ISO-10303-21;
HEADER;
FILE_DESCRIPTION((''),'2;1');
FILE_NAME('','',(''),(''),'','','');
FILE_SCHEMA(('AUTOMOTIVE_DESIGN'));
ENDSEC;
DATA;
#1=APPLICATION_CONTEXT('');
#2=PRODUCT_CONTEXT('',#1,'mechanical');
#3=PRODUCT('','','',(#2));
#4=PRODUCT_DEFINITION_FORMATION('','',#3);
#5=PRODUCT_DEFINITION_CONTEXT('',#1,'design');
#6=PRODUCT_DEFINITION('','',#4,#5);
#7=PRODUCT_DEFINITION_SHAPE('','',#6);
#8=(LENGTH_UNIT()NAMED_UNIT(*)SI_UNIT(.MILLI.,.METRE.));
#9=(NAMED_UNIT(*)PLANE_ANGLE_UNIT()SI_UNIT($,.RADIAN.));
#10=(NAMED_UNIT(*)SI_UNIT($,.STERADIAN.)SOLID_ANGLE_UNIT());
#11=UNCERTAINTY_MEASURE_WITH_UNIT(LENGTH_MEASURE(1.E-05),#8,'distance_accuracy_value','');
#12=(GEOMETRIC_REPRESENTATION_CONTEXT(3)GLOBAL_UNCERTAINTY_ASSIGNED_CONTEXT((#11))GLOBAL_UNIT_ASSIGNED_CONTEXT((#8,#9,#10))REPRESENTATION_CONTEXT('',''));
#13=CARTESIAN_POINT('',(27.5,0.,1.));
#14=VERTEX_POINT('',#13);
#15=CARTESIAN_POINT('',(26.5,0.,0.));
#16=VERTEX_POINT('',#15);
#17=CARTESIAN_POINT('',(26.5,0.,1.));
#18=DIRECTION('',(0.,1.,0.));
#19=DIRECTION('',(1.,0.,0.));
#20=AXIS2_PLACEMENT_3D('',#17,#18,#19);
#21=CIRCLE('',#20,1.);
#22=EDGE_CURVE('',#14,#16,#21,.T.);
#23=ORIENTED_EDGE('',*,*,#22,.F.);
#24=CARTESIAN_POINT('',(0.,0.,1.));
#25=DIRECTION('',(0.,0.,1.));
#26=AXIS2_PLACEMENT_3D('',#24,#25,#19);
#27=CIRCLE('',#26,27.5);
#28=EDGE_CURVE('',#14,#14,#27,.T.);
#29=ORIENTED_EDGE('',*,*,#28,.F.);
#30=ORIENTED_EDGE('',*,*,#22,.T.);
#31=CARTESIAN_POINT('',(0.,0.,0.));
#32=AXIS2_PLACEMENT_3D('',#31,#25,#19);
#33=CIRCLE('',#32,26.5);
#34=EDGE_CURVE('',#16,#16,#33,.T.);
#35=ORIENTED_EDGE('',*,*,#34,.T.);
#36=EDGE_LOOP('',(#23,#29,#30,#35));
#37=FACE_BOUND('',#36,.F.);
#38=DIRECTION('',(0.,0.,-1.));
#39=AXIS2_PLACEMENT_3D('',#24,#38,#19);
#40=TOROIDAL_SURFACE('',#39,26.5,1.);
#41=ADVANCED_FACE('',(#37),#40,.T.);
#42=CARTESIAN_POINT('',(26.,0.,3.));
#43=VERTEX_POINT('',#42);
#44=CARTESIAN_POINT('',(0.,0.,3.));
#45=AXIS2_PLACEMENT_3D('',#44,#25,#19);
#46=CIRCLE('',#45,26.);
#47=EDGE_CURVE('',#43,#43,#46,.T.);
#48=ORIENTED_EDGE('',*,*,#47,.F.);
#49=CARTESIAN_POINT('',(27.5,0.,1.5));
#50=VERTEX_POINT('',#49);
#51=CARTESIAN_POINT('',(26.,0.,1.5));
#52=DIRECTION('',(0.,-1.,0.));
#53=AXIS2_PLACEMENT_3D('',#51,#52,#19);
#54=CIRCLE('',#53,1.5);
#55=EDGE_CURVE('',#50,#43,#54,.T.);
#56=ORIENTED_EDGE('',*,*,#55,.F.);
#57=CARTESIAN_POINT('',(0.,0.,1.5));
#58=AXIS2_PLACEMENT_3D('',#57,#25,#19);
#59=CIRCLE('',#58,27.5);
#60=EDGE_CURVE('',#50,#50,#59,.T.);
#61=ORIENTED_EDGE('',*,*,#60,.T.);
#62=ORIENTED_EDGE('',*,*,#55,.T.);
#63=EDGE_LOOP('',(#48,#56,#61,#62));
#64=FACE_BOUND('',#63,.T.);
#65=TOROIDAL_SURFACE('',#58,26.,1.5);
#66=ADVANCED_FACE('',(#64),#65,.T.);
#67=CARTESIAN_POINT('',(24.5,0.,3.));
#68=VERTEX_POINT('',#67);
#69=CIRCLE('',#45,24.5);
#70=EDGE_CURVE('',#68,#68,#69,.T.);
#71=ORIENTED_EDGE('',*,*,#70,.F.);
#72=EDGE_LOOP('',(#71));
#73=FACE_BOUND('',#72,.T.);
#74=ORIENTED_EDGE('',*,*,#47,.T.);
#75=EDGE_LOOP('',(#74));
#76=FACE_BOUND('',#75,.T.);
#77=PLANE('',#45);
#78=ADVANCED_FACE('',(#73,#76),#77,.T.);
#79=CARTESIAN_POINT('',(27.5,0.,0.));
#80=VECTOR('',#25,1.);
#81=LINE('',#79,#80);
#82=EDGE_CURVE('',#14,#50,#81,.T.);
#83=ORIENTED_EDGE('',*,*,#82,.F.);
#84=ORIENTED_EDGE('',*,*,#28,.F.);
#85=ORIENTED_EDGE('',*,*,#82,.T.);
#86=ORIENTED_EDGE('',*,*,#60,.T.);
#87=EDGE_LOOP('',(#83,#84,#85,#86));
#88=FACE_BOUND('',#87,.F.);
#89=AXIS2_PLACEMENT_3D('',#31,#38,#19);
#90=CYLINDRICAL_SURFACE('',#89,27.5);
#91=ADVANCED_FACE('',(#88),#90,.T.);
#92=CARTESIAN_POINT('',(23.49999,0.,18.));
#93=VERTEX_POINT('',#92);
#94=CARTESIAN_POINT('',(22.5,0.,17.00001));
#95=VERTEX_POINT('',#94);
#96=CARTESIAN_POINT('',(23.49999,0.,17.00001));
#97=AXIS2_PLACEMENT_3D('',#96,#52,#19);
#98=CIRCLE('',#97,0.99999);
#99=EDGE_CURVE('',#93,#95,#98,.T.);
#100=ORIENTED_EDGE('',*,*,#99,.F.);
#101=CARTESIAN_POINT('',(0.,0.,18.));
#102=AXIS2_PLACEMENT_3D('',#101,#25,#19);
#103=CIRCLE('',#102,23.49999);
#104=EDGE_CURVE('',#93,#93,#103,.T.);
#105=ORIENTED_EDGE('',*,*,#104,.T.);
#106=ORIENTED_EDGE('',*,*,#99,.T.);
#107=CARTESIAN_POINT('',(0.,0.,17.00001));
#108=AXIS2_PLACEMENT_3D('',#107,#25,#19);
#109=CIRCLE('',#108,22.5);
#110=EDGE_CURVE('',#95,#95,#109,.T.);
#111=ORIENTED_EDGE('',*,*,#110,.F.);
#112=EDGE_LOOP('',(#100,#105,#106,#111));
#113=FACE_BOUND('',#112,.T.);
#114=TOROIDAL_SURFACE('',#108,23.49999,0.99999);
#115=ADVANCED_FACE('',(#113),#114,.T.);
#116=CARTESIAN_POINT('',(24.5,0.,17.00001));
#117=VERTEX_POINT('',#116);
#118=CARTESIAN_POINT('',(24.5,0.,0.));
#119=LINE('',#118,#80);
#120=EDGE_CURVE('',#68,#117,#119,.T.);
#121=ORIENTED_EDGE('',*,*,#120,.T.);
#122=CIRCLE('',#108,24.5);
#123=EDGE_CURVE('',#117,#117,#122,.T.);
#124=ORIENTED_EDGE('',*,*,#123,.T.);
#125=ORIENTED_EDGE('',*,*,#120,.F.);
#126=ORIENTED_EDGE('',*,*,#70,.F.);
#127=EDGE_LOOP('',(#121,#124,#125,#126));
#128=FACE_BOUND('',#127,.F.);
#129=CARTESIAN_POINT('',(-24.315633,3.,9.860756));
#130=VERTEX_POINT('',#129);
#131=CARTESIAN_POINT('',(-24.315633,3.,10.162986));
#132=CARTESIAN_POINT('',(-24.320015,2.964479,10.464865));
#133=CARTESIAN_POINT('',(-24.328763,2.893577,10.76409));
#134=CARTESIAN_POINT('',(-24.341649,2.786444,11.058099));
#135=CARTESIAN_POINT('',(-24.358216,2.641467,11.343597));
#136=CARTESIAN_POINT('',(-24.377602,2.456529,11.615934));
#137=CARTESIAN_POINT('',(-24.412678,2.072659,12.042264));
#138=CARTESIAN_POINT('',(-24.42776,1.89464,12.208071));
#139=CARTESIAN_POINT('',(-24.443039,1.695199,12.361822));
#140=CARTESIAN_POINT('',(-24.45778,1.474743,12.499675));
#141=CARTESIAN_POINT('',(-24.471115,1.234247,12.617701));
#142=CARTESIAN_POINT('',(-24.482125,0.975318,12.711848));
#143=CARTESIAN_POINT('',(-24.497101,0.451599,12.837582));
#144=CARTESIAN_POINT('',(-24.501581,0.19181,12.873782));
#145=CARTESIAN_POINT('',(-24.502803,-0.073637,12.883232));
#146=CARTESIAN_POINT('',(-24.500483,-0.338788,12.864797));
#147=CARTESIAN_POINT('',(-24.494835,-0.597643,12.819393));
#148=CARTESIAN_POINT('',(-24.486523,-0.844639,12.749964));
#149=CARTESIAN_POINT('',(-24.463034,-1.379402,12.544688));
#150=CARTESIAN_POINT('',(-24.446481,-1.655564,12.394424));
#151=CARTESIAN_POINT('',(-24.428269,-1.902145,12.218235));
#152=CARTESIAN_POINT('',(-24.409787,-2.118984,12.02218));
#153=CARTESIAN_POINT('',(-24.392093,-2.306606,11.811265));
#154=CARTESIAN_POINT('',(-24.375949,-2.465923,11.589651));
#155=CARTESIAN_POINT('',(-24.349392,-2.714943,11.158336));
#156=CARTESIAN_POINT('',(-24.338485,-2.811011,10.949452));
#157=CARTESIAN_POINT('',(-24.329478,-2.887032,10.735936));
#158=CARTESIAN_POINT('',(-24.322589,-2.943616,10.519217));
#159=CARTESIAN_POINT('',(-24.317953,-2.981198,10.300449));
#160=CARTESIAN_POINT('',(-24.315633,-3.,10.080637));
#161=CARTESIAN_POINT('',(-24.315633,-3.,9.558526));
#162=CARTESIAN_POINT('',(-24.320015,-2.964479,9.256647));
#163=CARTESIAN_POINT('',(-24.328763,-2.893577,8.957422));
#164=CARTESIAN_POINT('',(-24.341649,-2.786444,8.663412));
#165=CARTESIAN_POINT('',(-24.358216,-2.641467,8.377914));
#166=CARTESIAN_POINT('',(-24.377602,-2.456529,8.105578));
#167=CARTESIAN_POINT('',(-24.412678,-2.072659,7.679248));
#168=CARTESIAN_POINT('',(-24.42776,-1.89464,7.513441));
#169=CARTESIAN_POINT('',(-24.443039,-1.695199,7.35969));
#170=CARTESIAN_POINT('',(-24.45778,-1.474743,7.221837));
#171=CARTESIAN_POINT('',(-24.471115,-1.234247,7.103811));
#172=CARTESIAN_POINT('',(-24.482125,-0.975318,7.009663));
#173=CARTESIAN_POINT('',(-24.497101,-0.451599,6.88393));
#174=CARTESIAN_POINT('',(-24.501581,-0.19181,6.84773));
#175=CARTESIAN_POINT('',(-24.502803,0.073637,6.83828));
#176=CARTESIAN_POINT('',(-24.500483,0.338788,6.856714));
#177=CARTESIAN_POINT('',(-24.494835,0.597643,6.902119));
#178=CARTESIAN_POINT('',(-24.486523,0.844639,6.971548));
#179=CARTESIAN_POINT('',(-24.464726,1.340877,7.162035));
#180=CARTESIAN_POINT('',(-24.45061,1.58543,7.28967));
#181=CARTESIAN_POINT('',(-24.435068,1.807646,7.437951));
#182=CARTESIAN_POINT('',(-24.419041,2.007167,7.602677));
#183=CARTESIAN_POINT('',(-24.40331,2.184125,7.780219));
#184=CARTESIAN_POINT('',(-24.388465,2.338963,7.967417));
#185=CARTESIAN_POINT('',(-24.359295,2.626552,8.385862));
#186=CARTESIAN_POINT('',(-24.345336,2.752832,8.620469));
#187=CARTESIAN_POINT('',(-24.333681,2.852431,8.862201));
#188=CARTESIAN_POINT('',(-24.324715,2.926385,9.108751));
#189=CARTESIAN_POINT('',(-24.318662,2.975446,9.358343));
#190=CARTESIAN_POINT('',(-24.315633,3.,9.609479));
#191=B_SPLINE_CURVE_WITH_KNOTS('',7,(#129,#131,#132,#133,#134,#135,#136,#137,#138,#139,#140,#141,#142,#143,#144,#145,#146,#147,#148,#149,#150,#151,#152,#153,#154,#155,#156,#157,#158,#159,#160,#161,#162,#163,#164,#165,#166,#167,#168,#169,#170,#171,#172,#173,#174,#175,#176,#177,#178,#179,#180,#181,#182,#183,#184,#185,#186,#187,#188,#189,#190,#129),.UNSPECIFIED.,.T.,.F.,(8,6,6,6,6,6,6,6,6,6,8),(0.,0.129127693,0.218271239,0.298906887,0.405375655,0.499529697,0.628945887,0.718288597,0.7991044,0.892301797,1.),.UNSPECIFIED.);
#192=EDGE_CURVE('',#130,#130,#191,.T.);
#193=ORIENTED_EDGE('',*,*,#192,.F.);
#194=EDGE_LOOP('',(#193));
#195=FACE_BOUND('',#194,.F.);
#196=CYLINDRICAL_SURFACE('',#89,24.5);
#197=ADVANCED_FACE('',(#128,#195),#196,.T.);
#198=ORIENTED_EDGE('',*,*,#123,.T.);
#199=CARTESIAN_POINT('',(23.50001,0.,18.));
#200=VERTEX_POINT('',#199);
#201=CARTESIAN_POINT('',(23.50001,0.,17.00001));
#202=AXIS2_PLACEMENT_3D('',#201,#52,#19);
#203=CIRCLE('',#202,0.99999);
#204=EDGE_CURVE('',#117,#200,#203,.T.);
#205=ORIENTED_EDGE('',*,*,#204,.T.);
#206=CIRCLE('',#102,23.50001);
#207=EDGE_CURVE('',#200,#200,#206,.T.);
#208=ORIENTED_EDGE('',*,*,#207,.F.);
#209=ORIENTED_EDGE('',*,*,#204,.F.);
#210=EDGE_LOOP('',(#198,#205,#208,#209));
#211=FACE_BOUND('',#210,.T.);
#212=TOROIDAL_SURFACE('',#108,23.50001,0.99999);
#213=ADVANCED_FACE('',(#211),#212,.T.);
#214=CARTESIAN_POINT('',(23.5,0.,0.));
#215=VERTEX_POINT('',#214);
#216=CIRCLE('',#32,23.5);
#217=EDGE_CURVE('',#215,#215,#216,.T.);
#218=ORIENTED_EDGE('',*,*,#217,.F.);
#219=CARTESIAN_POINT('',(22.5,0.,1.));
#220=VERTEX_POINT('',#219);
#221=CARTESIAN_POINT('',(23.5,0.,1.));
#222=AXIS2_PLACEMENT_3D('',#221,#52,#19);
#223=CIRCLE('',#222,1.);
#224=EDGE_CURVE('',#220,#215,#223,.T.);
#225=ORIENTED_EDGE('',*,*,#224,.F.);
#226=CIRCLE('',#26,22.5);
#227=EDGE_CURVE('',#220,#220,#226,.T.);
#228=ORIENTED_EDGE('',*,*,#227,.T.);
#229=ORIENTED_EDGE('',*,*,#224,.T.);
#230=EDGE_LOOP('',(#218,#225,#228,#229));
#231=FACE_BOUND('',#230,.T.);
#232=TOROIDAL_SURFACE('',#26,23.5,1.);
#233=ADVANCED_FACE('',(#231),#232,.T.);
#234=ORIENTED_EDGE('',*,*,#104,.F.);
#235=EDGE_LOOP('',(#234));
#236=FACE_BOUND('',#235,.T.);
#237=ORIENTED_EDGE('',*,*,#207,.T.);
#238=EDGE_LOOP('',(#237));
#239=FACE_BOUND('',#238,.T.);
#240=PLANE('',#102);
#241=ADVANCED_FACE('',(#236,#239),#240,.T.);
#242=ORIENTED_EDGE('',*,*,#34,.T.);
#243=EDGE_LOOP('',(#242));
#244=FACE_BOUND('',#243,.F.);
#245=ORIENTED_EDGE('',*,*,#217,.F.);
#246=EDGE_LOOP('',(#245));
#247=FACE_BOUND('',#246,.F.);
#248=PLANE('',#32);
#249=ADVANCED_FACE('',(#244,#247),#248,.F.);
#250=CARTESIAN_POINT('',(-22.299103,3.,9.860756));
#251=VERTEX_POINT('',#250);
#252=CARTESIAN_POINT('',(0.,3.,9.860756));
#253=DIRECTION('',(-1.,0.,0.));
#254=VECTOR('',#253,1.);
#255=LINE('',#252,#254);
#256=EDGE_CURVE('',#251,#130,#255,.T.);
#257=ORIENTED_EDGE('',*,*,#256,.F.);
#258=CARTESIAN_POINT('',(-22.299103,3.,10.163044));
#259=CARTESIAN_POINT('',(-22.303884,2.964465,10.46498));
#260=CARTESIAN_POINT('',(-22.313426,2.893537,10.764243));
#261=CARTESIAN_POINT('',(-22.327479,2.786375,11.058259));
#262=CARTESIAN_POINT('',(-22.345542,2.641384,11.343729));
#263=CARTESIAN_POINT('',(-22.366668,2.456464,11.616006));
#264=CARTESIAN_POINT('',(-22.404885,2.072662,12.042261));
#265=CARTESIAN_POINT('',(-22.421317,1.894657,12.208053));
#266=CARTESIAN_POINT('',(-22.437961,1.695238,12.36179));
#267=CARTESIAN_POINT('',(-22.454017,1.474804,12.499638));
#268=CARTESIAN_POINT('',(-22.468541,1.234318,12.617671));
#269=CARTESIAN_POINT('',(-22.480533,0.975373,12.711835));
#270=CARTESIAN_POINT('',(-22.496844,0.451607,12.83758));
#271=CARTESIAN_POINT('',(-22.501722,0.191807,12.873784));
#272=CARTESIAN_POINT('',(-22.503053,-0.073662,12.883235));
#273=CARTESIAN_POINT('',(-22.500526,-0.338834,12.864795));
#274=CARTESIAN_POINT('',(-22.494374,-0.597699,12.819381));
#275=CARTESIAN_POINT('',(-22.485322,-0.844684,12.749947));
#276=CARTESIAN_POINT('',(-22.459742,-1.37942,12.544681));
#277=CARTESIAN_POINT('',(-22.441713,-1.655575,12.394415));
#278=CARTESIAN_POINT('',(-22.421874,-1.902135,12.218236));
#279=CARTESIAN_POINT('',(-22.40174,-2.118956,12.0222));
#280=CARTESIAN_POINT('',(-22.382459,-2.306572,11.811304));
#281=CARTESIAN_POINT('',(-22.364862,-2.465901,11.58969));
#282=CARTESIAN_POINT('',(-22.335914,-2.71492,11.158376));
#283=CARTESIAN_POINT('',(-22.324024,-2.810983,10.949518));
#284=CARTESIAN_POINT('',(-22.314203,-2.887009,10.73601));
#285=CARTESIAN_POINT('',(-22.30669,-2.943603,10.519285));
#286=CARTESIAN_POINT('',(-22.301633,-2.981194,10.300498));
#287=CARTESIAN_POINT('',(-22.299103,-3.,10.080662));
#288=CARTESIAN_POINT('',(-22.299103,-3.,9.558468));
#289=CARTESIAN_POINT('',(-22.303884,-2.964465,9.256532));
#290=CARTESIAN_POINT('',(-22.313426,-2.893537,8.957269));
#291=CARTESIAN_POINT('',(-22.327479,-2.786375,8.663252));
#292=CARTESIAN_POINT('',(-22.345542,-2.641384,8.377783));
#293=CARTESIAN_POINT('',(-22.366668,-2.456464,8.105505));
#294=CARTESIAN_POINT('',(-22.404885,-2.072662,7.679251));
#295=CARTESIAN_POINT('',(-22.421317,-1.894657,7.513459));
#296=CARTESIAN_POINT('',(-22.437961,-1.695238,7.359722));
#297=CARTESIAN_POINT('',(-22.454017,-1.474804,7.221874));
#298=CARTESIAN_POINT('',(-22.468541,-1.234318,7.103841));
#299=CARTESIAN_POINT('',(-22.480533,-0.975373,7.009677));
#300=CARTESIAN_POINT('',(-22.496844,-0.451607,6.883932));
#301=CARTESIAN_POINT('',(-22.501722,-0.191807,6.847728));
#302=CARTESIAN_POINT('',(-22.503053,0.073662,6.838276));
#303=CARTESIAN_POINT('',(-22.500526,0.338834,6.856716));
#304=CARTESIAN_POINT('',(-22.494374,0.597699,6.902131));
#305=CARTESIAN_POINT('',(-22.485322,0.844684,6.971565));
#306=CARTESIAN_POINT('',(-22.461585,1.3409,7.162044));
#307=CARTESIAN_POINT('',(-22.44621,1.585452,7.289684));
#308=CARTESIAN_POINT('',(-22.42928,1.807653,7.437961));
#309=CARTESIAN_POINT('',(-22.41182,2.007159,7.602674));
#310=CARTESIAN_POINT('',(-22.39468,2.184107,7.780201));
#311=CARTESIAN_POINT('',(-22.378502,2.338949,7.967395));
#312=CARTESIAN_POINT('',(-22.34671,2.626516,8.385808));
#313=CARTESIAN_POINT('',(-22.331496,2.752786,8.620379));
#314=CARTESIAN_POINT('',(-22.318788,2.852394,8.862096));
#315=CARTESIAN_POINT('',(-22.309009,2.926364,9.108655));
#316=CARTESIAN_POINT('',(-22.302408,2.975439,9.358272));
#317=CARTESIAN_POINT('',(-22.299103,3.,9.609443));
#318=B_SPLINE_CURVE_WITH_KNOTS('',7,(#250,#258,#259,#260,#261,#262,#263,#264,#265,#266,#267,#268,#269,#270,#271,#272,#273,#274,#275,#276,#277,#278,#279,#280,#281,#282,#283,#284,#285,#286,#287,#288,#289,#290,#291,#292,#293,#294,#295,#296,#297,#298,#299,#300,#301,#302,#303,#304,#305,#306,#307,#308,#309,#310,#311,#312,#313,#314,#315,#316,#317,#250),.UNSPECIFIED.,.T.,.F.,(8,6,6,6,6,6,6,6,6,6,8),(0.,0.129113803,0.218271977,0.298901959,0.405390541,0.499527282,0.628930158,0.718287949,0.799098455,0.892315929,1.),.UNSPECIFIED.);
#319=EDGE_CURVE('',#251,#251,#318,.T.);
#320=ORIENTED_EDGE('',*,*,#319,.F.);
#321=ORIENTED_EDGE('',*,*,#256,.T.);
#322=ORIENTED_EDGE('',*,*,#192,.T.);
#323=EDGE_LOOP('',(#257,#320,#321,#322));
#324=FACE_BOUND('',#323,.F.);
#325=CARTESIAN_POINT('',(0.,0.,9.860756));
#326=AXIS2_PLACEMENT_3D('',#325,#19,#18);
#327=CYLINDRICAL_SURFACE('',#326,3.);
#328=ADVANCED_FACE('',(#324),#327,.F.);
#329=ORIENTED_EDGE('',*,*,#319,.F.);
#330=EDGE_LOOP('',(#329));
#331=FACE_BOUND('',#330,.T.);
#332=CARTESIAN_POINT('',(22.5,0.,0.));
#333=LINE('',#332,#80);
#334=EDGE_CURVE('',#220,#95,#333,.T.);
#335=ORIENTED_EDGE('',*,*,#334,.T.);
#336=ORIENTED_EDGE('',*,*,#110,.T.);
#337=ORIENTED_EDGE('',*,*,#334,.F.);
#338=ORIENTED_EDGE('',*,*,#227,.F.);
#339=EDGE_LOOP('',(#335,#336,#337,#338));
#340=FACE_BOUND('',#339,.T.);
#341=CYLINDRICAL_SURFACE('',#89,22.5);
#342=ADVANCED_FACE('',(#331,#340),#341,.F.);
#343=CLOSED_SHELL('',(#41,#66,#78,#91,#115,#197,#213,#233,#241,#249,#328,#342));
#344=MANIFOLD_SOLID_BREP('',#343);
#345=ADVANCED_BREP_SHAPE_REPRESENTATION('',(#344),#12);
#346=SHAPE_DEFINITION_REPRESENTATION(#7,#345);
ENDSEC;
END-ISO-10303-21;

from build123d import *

# Parameters (mm, degrees)
F0_R     = 27.5
F0_R_2   = 24.5
F1_DEPTH = 3
F0_R_3   = 22.5
F2_DEPTH = 18
F3_R     = 1
F4_R     = 1.5
F5_R     = 0.99999
F7_D     = 6
F7_DEPTH = 25
F7_TIP   = 1.8025818571


# Not quite as in the source:
# - a fillet or chamfer is up to 0.001 mm smaller than in the source, because OpenCascade refuses the exact size


with BuildPart() as f1:
    # F0 (on Top) → F1 (new body)
    with BuildSketch(Plane.XY):
        Circle(F0_R)
        Circle(F0_R_2, mode=Mode.SUBTRACT)
    extrude(amount=F1_DEPTH)

    # F0 (on Top) → F2 (join)
    with BuildSketch(Plane.XY):
        Circle(F0_R_2)
        Circle(F0_R_3, mode=Mode.SUBTRACT)
    extrude(amount=F2_DEPTH)

    # F3
    f3_edges = [f1.edges().sort_by_distance(p)[0] for p in [
        (-27.5, 0, 0),
        (-22.5, 0, 0),
    ]]
    fillet(f3_edges, radius=F3_R)

    # F4
    f4_edges = [f1.edges().sort_by_distance(p)[0] for p in [
        (-27.5, 0, 3),
    ]]
    fillet(f4_edges, radius=F4_R)

    # F5 (radius 1 in the source; OpenCascade refuses exactly that, so slightly less here)
    f5_edges = [f1.edges().sort_by_distance(p)[0] for p in [
        (-22.5, 0, 18),
        (-24.5, 0, 18),
    ]]
    fillet(f5_edges, radius=F5_R)

    # F7 (one way)
    with BuildSketch(Plane.YZ):
        with Locations((0, 9.8607558757)):
            Circle(F7_D / 2)
    extrude(amount=-F7_DEPTH, mode=Mode.SUBTRACT)
    with Locations(Plane.YZ):
        with Locations((0, 9.8607558757)):
            with Locations((0, 0, -(F7_DEPTH + F7_TIP / 2))):  # 118° drill point
                Cone(0, F7_D / 2, F7_TIP, mode=Mode.SUBTRACT)


solid = f1.part
